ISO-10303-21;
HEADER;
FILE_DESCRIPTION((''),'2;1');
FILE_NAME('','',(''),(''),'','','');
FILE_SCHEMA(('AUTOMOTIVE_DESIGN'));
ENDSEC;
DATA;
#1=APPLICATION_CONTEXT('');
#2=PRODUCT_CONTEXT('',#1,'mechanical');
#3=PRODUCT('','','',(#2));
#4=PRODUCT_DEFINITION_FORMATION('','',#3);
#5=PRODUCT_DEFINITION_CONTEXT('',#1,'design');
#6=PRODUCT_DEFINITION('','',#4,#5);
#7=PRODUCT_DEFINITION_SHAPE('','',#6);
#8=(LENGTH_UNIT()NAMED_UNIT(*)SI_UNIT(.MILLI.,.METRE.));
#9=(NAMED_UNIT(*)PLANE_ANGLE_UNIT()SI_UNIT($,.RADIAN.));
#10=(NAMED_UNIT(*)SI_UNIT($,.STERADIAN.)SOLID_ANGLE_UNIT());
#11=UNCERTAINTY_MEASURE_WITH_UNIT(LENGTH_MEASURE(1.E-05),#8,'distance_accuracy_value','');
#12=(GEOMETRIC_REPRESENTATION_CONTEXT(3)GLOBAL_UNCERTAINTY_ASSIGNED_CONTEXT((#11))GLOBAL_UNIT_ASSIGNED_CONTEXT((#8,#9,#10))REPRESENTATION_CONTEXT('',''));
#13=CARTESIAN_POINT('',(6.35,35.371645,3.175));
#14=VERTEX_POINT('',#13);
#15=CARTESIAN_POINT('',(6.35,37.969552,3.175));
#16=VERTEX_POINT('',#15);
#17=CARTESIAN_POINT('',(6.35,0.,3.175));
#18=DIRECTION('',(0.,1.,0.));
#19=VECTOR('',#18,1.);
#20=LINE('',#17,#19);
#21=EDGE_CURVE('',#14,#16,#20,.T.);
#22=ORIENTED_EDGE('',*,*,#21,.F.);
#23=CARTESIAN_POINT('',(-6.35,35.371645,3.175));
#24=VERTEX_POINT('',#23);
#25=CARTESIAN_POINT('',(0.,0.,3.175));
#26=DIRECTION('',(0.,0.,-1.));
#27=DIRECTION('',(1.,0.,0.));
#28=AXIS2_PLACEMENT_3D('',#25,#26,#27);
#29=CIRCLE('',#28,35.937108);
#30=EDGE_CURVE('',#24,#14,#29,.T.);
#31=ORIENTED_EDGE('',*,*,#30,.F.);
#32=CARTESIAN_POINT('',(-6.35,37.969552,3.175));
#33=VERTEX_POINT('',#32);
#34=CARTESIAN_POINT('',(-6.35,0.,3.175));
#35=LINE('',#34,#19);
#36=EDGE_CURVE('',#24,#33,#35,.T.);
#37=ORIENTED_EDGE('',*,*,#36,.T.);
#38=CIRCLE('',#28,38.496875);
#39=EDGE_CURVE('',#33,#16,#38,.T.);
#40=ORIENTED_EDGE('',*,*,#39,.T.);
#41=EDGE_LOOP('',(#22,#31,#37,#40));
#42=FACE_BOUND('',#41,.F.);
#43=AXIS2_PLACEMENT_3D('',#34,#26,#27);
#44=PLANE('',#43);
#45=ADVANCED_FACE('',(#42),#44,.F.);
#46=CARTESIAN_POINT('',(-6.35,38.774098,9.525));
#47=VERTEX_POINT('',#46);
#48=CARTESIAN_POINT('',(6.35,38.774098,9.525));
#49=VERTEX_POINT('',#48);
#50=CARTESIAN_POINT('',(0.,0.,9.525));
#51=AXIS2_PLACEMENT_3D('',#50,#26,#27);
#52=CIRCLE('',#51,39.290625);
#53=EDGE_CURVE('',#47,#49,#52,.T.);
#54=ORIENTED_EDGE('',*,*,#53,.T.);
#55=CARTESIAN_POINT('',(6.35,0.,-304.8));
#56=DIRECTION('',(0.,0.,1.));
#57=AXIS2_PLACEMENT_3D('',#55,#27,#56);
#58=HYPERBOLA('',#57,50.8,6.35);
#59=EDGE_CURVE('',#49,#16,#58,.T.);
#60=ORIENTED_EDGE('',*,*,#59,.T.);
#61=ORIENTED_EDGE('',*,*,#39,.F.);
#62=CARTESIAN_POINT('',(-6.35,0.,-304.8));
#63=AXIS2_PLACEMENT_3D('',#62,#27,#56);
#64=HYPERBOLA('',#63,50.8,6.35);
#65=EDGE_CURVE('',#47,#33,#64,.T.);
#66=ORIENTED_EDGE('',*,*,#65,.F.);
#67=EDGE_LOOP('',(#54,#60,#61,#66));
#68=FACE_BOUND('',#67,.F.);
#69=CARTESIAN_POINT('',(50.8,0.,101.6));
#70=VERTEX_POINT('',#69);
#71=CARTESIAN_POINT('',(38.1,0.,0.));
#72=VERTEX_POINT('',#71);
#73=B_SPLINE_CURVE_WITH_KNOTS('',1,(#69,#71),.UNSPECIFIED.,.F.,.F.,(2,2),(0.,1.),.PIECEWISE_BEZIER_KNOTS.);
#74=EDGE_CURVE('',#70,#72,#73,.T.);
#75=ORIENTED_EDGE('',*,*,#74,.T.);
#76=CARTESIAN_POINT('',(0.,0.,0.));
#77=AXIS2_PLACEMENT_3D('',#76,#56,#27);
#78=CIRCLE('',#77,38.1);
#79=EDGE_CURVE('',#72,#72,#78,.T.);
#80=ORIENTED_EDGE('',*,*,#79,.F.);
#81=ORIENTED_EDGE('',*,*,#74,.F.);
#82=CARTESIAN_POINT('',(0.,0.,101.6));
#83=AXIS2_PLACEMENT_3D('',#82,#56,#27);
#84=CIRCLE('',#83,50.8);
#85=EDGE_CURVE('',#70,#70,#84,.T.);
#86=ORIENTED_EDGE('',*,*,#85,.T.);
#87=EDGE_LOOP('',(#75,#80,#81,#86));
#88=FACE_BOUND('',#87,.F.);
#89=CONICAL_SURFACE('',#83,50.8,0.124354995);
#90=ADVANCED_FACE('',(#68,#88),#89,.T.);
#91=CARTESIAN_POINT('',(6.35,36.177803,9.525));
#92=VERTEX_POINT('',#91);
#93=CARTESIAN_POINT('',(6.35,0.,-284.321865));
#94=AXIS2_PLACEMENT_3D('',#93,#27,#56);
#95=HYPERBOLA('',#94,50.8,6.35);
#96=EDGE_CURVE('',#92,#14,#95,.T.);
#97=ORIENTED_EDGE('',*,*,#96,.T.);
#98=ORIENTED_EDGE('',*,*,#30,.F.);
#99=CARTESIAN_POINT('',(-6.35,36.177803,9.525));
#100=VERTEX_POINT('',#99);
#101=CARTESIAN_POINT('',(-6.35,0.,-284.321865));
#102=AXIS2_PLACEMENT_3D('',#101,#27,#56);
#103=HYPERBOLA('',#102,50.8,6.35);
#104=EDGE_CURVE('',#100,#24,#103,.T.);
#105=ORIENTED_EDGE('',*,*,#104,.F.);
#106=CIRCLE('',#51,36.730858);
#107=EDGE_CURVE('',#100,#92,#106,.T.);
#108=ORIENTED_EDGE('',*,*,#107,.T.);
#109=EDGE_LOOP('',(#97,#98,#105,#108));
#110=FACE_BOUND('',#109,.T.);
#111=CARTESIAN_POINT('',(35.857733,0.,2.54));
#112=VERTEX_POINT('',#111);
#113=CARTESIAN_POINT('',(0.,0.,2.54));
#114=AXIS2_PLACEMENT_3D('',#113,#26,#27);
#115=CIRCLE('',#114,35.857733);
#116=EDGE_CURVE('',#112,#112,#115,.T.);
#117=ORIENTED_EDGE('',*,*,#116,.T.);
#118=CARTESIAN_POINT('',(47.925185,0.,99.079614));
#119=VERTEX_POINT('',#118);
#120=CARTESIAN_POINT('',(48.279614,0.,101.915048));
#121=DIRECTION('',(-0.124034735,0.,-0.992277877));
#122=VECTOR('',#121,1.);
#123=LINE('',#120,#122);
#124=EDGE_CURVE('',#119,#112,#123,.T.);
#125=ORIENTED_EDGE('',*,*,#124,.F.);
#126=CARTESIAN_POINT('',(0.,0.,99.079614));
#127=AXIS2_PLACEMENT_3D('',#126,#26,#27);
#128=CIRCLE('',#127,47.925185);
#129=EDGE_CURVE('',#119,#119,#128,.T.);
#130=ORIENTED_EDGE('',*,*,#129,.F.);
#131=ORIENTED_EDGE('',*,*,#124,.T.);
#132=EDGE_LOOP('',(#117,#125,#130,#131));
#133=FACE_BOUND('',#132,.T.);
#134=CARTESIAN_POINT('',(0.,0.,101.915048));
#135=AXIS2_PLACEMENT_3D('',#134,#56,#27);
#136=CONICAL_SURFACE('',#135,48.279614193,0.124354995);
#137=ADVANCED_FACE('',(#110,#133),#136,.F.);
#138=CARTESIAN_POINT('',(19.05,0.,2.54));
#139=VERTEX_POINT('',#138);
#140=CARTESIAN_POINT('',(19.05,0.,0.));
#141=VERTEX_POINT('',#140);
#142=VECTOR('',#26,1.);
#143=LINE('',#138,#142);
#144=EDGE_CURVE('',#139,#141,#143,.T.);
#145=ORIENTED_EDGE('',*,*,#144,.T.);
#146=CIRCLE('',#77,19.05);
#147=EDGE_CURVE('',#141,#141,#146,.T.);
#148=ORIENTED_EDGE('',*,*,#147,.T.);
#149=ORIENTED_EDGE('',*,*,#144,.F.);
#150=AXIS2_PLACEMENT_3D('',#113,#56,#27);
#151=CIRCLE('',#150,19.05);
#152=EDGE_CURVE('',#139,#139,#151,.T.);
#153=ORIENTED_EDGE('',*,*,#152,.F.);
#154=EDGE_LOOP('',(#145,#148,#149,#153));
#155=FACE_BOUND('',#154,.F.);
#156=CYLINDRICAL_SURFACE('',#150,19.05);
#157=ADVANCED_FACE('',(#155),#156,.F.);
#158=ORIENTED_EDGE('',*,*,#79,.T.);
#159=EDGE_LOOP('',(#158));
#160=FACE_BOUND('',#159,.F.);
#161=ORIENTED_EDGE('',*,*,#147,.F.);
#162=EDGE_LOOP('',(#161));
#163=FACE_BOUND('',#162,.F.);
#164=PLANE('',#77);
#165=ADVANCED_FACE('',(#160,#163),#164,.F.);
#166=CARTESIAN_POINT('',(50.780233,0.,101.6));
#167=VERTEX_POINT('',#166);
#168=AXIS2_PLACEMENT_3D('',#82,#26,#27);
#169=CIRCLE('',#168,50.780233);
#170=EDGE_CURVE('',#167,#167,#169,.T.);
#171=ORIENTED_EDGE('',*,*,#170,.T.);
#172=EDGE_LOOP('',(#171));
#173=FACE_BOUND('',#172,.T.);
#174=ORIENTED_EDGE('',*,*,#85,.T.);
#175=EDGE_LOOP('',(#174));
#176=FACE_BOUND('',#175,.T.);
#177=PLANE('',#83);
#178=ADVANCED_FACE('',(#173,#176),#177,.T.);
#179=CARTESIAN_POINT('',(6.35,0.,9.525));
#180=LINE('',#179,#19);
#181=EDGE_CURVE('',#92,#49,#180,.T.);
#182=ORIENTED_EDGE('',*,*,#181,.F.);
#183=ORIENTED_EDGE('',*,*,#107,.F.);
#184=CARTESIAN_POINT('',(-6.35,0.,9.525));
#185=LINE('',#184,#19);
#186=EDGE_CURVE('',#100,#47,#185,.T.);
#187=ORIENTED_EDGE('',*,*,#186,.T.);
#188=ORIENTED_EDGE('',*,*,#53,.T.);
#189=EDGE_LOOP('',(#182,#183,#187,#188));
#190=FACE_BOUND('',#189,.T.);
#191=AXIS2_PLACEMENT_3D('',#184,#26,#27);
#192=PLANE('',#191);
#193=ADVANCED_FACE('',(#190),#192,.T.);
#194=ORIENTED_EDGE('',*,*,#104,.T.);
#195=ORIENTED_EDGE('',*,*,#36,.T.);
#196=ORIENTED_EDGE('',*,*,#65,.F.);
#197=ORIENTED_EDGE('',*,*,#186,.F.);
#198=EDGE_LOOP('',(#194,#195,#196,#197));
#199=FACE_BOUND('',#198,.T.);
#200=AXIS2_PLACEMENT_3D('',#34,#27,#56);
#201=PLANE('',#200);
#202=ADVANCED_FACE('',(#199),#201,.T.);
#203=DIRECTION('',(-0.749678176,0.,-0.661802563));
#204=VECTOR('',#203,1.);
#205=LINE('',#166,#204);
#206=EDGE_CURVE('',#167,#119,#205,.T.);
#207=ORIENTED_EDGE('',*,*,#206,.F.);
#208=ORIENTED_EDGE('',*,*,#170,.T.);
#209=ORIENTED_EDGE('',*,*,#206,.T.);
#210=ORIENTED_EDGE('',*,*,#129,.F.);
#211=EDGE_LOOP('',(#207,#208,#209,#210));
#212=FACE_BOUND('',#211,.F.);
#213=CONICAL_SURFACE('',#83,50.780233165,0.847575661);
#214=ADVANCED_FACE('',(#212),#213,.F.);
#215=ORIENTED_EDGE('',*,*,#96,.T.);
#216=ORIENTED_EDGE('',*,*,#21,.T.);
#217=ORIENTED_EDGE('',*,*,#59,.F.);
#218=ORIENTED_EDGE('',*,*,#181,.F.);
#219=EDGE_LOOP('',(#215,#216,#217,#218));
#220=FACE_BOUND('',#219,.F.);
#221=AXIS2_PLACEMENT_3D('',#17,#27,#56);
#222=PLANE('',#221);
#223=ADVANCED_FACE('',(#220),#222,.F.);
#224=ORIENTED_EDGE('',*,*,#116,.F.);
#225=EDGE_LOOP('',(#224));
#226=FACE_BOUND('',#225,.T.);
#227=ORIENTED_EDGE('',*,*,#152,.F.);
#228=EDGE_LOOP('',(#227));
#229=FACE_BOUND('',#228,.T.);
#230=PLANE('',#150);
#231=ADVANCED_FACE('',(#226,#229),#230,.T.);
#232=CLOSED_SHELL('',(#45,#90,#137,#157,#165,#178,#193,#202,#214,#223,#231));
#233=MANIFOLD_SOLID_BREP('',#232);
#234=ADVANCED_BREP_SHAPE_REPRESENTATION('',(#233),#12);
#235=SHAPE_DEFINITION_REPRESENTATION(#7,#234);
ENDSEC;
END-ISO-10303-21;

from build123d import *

# Parameters (mm, degrees)
F2_R     = 50.8
F0_R     = 38.1
F4_T     = -2.54
F5_W     = 12.7
F5_H     = 6.35
F6_DEPTH = 40.132
F8_R     = 19.05
F9_DEPTH = 25.4


# Not quite as in the source:
# - a fillet or chamfer that OpenCascade refuses, or shapes differently, is made with other operations: its cross-section is extruded or revolved along the edge and cut away or added


with BuildPart() as f3:
    # F2 (on offset) → F3 section 0
    with BuildSketch(Plane.XY.offset(101.6)):
        Circle(F2_R)
    # F0 (on Top) → F3 section 1
    with BuildSketch(Plane.XY):
        Circle(F0_R)
    loft()

    # F4
    f4_openings = [f3.faces().sort_by_distance(p)[0] for p in [
        (0, 0, 101.6),
    ]]
    offset(amount=F4_T, openings=f4_openings, kind=Kind.INTERSECTION)

    # F5 (on Front) → F6 (cut)
    with BuildSketch(Plane.XZ):
        with Locations((0, 6.35)):
            Rectangle(F5_W, F5_H)
    extrude(amount=-F6_DEPTH, mode=Mode.SUBTRACT)

    # F7: chamfer of 2.54 on 1 edges, made by hand

    # F7_s1 → F7_t2 (revolve, cut)
    with BuildSketch(Plane.XZ):
        Polygon((50.7802331649, 101.6), (47.9251849391, 99.0796141931), (48.2402331649, 101.6), align=None)
    revolve(axis=Axis((0, 0, 101.6), (0, 0, -1)), mode=Mode.SUBTRACT)

    # F8 (on face) → F9 (cut)
    with BuildSketch(Plane.XY.offset(2.54)):
        Circle(F8_R)
    extrude(amount=-F9_DEPTH, mode=Mode.SUBTRACT)


solid = f3.part
